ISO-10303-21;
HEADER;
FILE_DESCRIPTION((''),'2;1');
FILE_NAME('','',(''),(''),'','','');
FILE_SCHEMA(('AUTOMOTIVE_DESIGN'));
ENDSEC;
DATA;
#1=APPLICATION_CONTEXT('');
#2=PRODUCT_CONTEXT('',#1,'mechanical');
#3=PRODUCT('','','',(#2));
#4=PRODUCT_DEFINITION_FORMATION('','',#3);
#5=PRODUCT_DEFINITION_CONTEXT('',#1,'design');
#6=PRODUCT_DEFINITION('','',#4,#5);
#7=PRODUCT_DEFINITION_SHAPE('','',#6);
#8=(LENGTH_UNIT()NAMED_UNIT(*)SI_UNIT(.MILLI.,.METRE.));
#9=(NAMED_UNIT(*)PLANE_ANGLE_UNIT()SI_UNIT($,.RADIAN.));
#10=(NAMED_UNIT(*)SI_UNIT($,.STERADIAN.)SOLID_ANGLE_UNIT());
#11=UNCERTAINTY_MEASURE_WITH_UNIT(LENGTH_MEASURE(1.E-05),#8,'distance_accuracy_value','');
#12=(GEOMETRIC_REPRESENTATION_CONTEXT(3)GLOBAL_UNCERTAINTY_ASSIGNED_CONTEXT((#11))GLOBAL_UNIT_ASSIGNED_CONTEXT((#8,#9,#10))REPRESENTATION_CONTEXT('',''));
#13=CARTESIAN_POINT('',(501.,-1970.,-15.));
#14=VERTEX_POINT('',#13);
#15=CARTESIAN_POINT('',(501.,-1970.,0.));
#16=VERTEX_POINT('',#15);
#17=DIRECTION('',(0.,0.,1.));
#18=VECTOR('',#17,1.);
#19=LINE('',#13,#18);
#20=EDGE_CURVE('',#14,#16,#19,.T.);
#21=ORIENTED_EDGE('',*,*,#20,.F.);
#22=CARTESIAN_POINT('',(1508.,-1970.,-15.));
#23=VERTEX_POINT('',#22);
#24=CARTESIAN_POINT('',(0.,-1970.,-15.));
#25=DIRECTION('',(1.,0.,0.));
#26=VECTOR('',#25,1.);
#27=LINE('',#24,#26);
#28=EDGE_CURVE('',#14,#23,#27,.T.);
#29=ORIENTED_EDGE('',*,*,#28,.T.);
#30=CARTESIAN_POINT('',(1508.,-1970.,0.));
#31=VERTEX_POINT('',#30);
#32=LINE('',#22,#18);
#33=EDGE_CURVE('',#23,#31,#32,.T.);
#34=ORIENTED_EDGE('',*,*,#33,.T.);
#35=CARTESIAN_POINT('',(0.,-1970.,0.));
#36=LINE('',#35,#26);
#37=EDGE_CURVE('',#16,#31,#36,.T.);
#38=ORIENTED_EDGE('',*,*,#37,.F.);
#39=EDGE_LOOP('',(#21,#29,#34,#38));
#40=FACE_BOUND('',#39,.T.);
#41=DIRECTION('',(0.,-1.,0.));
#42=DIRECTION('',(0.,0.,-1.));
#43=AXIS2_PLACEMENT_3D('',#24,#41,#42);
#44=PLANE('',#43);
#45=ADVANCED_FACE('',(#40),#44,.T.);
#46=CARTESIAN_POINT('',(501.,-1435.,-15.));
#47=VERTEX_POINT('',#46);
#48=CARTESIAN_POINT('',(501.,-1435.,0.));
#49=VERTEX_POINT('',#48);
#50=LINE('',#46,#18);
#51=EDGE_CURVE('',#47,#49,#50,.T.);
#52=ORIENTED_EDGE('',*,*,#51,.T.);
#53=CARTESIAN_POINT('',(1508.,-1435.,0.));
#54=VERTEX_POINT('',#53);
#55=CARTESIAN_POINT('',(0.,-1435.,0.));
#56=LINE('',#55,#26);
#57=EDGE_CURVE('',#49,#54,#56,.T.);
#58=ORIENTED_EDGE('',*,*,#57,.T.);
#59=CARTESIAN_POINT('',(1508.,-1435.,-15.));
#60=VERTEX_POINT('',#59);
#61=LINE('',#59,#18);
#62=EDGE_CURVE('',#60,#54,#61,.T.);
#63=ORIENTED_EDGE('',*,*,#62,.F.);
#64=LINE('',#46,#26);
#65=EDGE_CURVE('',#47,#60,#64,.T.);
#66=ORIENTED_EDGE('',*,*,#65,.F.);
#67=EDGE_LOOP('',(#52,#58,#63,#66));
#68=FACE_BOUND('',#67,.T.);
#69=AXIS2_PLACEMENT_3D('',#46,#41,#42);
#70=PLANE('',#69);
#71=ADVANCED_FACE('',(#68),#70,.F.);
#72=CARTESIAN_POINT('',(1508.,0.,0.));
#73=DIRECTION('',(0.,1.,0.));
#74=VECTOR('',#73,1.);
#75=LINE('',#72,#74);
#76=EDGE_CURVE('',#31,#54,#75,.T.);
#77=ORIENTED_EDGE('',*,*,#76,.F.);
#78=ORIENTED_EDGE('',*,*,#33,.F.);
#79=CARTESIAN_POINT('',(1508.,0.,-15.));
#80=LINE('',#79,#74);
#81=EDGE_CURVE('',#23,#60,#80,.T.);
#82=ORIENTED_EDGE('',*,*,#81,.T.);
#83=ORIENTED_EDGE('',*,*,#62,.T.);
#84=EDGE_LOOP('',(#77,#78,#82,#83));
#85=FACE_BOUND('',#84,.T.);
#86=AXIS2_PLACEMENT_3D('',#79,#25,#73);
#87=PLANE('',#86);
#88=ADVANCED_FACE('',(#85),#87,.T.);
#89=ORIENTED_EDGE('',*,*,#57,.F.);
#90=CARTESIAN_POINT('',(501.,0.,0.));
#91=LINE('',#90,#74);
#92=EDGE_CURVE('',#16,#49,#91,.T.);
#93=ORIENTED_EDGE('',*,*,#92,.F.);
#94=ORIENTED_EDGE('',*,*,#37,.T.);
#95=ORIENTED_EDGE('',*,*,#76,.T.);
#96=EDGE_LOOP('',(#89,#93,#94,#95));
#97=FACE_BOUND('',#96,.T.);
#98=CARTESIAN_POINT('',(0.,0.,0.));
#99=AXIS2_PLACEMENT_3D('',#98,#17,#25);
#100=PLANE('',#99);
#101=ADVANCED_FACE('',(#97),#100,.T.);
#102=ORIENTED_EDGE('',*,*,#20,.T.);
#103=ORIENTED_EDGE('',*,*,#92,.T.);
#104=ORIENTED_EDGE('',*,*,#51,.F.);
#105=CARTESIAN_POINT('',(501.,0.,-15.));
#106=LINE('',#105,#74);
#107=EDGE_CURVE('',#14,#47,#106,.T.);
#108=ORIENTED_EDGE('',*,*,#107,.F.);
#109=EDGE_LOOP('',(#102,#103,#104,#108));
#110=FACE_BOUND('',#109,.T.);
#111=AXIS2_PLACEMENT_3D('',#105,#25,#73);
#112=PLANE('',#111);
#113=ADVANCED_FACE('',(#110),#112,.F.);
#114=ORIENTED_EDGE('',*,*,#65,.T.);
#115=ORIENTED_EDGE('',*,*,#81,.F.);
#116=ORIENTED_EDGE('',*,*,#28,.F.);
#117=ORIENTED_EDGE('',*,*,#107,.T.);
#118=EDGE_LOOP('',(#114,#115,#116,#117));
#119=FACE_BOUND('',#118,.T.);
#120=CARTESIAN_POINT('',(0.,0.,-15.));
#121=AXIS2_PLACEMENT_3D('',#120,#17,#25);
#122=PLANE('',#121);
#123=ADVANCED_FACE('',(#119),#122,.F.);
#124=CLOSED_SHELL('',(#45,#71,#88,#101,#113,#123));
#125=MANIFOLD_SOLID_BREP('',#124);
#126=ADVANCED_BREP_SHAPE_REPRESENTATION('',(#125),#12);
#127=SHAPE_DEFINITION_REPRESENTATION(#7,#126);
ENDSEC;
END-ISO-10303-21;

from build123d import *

# Parameters (mm, degrees)
IZIM1_W                    = 1508
IZIM1_H                    = 1970
TABAN_FLAN_1_DEPTH         = 15
KES_EKSTR_ZYON1_DEPTH      = 2481.965336316
KES_EKSTR_ZYON1_DEPTH_BACK = 2481.965336316
IZIM2_W                    = 501
IZIM2_H                    = 1970
KES_EKSTR_ZYON2_DEPTH      = 2481.965336316
KES_EKSTR_ZYON2_DEPTH_BACK = 2481.965336316
IZIM3_W                    = 1007
IZIM3_H                    = 310
KES_EKSTR_ZYON3_DEPTH      = 2481.965336316
KES_EKSTR_ZYON3_DEPTH_BACK = 2481.965336316
IZIM4_W                    = 1007
IZIM4_H                    = 1125


# Sheet-metal steps are written as plain solids
with BuildPart() as part:
    # Çizim1 → Taban-Flanş1 (new body)
    with BuildSketch(Plane.XY):
        with Locations((754, -985)):
            Rectangle(IZIM1_W, IZIM1_H)
    extrude(amount=-TABAN_FLAN_1_DEPTH)

    # Çizim2 → Kes-Ekstrüzyon1 (cut, two sides: drawn at the far end of the back side and taken through both)
    with BuildSketch(Plane.XY.offset(-KES_EKSTR_ZYON1_DEPTH_BACK)):
        with Locations((250.5, -985)):
            Rectangle(IZIM2_W, IZIM2_H)
    extrude(amount=KES_EKSTR_ZYON1_DEPTH + KES_EKSTR_ZYON1_DEPTH_BACK, mode=Mode.SUBTRACT)

    # Çizim3 → Kes-Ekstrüzyon2 (cut, two sides: drawn at the far end of the back side and taken through both)
    with BuildSketch(Plane.XY.offset(-KES_EKSTR_ZYON2_DEPTH_BACK)):
        with Locations((1004.5, -155)):
            Rectangle(IZIM3_W, IZIM3_H)
    extrude(amount=KES_EKSTR_ZYON2_DEPTH + KES_EKSTR_ZYON2_DEPTH_BACK, mode=Mode.SUBTRACT)

    # Çizim4 → Kes-Ekstrüzyon3 (cut, two sides: drawn at the far end of the back side and taken through both)
    with BuildSketch(Plane.XY.offset(-KES_EKSTR_ZYON3_DEPTH_BACK)):
        with Locations((1004.5, -872.5)):
            Rectangle(IZIM4_W, IZIM4_H)
    extrude(amount=KES_EKSTR_ZYON3_DEPTH + KES_EKSTR_ZYON3_DEPTH_BACK, mode=Mode.SUBTRACT)


solid = part.part
